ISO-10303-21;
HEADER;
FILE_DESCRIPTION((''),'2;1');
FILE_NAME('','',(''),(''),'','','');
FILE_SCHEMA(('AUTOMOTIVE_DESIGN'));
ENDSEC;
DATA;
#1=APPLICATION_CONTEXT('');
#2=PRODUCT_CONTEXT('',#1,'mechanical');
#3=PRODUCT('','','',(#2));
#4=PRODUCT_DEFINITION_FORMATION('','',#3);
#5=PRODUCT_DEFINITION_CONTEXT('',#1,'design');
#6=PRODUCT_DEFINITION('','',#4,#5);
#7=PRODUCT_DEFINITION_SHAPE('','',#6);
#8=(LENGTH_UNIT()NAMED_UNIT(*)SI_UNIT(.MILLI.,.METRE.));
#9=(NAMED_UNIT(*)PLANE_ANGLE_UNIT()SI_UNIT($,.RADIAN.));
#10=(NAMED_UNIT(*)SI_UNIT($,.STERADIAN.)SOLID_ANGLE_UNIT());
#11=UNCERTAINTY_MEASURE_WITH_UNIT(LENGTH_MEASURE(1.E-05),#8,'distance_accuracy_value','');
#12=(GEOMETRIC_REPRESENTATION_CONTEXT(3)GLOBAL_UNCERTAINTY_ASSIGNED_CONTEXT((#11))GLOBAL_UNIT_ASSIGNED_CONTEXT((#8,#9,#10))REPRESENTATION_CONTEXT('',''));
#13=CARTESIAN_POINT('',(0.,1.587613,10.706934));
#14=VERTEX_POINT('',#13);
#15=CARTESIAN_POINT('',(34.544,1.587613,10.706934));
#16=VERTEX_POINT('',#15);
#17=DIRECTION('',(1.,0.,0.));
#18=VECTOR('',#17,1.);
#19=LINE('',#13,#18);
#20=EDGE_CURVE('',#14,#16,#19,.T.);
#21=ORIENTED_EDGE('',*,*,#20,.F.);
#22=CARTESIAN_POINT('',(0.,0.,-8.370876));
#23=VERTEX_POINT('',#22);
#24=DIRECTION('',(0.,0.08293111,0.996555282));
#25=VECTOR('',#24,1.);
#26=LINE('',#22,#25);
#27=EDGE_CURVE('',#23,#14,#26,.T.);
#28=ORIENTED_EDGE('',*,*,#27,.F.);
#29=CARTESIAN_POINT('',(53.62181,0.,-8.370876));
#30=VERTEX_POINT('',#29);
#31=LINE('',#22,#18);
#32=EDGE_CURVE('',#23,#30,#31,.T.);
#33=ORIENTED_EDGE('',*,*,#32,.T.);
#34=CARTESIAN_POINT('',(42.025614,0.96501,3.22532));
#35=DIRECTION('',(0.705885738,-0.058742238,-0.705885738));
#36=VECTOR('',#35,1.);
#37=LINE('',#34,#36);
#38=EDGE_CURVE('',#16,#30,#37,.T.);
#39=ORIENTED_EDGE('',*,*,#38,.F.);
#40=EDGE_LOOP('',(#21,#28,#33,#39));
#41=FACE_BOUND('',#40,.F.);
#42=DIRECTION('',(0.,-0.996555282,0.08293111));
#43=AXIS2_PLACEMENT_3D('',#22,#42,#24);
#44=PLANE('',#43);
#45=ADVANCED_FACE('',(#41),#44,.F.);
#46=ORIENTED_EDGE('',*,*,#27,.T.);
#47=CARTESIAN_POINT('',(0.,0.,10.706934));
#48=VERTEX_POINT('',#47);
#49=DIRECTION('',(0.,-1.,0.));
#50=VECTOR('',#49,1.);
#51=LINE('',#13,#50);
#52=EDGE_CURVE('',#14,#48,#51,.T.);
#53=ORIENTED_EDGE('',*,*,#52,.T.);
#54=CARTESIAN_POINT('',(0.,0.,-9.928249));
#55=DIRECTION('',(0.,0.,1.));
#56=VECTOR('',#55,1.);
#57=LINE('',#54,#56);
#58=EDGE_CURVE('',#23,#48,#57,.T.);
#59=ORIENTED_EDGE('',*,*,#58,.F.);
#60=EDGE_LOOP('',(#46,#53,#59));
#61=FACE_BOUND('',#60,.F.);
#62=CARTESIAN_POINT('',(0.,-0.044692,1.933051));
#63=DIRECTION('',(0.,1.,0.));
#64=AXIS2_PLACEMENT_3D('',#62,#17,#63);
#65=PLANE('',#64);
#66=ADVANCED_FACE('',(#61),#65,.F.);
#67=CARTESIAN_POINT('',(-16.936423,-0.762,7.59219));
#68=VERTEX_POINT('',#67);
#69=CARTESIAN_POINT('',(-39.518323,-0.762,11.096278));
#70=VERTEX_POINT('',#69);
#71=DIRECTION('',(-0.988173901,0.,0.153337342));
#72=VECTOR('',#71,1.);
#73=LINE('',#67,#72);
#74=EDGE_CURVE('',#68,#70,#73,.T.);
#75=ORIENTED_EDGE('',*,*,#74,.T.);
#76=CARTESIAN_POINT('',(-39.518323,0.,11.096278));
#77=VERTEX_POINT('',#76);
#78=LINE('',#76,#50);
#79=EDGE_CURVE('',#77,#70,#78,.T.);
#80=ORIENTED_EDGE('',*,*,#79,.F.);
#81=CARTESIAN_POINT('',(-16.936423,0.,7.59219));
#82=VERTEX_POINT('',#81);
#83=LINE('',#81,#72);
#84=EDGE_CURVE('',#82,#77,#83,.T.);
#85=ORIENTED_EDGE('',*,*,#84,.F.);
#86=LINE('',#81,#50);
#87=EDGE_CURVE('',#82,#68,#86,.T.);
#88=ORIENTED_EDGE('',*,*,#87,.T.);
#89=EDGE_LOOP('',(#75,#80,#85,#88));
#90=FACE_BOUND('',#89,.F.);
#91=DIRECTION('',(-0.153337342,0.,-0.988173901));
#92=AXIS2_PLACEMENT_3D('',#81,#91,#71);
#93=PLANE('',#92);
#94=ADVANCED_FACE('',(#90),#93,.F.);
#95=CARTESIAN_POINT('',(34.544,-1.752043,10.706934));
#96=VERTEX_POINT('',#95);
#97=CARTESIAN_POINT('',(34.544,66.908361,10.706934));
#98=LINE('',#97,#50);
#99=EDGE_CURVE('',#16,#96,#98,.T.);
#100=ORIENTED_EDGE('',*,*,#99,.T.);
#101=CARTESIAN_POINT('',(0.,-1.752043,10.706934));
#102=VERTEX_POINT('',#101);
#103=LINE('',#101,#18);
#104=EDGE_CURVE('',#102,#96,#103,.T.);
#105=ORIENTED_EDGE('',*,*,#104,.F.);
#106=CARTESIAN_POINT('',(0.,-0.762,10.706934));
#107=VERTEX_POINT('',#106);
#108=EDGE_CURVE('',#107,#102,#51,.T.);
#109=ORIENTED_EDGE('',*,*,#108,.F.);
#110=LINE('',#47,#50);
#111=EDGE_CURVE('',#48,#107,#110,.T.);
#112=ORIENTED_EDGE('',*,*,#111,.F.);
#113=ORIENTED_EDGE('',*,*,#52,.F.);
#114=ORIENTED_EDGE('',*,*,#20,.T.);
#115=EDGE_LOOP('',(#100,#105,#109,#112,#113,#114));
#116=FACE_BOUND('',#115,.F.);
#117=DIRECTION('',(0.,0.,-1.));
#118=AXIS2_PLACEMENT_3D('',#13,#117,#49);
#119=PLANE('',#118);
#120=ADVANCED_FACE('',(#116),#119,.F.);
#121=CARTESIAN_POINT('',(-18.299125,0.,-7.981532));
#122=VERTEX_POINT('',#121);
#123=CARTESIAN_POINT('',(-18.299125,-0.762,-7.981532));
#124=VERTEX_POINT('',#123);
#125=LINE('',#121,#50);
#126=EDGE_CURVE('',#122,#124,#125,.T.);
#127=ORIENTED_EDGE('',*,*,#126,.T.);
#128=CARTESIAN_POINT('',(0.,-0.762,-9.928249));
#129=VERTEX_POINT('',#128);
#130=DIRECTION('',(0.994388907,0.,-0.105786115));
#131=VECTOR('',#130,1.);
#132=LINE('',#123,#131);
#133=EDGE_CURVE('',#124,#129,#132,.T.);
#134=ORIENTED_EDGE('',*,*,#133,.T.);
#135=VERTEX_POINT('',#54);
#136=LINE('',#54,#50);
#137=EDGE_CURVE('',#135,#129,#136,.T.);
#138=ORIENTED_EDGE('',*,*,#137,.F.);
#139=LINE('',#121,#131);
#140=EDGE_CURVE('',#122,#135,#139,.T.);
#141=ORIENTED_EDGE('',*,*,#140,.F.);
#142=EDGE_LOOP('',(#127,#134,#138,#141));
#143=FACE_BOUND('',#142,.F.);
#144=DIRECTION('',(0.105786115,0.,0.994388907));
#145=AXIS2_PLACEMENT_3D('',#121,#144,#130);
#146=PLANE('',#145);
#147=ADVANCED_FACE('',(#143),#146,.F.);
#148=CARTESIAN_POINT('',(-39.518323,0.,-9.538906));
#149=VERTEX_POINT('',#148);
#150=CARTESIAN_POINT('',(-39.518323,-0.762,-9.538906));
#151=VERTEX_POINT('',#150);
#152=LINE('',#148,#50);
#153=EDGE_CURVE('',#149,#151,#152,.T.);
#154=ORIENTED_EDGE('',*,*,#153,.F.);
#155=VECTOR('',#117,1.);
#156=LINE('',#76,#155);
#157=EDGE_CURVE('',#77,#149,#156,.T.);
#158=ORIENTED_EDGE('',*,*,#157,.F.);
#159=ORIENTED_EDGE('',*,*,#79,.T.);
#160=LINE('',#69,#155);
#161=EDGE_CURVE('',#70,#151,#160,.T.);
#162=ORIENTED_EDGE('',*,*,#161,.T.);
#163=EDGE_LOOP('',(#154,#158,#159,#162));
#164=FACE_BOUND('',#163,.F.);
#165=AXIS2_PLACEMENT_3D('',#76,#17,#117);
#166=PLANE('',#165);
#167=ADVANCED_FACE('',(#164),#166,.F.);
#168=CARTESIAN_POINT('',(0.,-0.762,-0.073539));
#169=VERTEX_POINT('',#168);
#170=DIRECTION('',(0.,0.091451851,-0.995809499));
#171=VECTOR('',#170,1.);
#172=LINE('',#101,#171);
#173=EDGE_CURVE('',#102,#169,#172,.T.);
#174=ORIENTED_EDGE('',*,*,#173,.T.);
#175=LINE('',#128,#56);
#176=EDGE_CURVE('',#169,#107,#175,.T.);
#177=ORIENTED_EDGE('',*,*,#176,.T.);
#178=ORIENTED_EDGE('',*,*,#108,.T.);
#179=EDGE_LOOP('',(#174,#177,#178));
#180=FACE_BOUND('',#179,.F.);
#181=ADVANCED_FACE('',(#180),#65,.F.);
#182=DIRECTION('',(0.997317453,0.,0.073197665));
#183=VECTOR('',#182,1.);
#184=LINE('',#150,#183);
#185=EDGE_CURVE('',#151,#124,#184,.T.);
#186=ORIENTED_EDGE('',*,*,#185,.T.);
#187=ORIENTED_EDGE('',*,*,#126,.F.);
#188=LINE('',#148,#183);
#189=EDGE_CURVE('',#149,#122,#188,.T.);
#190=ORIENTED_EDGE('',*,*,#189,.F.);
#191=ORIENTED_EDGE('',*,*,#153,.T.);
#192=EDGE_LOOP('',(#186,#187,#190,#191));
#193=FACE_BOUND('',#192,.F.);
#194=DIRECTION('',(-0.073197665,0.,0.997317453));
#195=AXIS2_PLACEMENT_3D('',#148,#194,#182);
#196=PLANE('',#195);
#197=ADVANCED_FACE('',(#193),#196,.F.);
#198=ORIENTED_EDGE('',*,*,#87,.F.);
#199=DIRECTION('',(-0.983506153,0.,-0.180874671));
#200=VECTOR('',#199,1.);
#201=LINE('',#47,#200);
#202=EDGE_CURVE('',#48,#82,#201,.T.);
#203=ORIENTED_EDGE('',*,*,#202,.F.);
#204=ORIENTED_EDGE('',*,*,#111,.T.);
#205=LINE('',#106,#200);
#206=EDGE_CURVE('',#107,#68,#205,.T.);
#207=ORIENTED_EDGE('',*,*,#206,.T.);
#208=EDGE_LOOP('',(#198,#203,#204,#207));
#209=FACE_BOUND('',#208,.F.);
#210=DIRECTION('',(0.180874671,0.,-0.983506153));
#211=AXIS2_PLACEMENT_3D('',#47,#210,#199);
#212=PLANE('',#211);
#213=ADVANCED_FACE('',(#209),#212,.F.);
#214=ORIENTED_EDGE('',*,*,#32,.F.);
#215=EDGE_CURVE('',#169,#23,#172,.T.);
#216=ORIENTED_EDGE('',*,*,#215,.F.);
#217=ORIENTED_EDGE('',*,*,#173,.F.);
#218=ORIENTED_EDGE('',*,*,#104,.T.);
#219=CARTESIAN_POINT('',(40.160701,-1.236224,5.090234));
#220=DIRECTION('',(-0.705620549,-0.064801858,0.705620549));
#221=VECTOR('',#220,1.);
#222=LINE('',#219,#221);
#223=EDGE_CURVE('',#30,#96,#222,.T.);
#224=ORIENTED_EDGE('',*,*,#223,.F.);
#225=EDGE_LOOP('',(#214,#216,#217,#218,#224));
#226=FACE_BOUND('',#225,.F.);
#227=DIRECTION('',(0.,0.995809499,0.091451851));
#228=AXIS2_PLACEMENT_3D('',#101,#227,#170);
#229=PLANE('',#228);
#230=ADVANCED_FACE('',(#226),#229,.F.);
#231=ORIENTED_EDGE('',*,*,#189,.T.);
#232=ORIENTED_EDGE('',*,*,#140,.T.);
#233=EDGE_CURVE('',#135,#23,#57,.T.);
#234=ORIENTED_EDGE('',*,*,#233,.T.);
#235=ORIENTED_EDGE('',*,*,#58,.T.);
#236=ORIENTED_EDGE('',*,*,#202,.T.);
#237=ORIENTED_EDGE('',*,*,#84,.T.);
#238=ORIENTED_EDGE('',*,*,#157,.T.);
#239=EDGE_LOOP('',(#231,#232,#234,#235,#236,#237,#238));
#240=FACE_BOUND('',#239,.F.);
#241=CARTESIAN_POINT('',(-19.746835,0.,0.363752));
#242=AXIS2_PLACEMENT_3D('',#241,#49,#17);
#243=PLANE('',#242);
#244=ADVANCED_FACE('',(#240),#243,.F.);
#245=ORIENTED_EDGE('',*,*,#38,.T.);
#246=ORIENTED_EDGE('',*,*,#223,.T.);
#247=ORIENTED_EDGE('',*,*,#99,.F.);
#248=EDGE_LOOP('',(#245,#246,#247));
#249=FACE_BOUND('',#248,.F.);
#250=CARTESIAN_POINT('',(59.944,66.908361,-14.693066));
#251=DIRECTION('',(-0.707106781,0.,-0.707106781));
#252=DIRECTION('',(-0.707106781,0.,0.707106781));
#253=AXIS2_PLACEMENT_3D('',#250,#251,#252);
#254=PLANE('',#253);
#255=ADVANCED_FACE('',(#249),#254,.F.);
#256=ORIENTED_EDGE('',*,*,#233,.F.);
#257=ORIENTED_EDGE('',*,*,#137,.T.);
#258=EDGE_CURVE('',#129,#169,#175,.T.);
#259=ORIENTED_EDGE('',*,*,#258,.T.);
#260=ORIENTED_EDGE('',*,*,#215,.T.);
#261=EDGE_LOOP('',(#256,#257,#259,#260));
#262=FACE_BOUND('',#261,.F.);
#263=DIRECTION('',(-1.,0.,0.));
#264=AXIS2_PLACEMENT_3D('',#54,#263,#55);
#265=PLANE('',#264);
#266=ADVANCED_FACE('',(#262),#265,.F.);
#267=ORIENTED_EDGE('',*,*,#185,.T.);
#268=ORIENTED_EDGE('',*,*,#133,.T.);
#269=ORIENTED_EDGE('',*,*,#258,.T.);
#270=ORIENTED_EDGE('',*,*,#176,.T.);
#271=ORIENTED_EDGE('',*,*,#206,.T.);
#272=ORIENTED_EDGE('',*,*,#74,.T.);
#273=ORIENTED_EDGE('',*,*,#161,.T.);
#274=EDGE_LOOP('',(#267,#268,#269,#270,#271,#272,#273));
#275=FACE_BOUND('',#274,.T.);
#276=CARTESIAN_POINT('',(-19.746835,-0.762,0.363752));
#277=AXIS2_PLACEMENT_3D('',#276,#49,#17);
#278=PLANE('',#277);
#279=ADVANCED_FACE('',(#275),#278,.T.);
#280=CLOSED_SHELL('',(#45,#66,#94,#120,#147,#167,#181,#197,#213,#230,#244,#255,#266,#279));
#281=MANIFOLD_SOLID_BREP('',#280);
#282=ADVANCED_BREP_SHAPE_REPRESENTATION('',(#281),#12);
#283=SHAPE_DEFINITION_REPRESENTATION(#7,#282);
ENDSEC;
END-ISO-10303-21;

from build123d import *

# Parameters (mm, degrees)
F1_DEPTH    = 59.944
F2_T1_DEPTH = 133.9811516914
F4_DEPTH    = 0.762


# Not quite as in the source:
# - a fillet or chamfer that OpenCascade refuses, or shapes differently, is made with other operations: its cross-section is extruded or revolved along the edge and cut away or added


with BuildPart() as f1:
    # F0 (on Right) → F1 (new body)
    with BuildSketch(Plane.YZ):
        Polygon((1.5876128762, 10.7069341466), (0, 10.7069341466), (-1.7520430265, 10.7069341466), (0, -8.3708763123), align=None)
    extrude(amount=F1_DEPTH)

    # F2: chamfer of 25.4 on 1 edges, made by hand

    # F2_s2 → F2_t1 (cut)
    with BuildSketch(Plane.XZ.offset(-66.9083607706)):
        Polygon((59.944, -14.6930658534), (34.544, 10.7069341466), (59.944, 10.7069341466), align=None)
    extrude(amount=F2_T1_DEPTH, mode=Mode.SUBTRACT)

    # F3 (on Front) → F4 (join)
    with BuildSketch(Plane.XZ):
        Polygon((0, -9.9282488227), (0, 10.7069341466), (-16.936423257, 7.592190057), (-39.5183227956, 11.0962782055), (-39.5183227956, -9.5389056951), (-18.2991251349, -7.9815322533), align=None)
    extrude(amount=F4_DEPTH)


solid = f1.part
